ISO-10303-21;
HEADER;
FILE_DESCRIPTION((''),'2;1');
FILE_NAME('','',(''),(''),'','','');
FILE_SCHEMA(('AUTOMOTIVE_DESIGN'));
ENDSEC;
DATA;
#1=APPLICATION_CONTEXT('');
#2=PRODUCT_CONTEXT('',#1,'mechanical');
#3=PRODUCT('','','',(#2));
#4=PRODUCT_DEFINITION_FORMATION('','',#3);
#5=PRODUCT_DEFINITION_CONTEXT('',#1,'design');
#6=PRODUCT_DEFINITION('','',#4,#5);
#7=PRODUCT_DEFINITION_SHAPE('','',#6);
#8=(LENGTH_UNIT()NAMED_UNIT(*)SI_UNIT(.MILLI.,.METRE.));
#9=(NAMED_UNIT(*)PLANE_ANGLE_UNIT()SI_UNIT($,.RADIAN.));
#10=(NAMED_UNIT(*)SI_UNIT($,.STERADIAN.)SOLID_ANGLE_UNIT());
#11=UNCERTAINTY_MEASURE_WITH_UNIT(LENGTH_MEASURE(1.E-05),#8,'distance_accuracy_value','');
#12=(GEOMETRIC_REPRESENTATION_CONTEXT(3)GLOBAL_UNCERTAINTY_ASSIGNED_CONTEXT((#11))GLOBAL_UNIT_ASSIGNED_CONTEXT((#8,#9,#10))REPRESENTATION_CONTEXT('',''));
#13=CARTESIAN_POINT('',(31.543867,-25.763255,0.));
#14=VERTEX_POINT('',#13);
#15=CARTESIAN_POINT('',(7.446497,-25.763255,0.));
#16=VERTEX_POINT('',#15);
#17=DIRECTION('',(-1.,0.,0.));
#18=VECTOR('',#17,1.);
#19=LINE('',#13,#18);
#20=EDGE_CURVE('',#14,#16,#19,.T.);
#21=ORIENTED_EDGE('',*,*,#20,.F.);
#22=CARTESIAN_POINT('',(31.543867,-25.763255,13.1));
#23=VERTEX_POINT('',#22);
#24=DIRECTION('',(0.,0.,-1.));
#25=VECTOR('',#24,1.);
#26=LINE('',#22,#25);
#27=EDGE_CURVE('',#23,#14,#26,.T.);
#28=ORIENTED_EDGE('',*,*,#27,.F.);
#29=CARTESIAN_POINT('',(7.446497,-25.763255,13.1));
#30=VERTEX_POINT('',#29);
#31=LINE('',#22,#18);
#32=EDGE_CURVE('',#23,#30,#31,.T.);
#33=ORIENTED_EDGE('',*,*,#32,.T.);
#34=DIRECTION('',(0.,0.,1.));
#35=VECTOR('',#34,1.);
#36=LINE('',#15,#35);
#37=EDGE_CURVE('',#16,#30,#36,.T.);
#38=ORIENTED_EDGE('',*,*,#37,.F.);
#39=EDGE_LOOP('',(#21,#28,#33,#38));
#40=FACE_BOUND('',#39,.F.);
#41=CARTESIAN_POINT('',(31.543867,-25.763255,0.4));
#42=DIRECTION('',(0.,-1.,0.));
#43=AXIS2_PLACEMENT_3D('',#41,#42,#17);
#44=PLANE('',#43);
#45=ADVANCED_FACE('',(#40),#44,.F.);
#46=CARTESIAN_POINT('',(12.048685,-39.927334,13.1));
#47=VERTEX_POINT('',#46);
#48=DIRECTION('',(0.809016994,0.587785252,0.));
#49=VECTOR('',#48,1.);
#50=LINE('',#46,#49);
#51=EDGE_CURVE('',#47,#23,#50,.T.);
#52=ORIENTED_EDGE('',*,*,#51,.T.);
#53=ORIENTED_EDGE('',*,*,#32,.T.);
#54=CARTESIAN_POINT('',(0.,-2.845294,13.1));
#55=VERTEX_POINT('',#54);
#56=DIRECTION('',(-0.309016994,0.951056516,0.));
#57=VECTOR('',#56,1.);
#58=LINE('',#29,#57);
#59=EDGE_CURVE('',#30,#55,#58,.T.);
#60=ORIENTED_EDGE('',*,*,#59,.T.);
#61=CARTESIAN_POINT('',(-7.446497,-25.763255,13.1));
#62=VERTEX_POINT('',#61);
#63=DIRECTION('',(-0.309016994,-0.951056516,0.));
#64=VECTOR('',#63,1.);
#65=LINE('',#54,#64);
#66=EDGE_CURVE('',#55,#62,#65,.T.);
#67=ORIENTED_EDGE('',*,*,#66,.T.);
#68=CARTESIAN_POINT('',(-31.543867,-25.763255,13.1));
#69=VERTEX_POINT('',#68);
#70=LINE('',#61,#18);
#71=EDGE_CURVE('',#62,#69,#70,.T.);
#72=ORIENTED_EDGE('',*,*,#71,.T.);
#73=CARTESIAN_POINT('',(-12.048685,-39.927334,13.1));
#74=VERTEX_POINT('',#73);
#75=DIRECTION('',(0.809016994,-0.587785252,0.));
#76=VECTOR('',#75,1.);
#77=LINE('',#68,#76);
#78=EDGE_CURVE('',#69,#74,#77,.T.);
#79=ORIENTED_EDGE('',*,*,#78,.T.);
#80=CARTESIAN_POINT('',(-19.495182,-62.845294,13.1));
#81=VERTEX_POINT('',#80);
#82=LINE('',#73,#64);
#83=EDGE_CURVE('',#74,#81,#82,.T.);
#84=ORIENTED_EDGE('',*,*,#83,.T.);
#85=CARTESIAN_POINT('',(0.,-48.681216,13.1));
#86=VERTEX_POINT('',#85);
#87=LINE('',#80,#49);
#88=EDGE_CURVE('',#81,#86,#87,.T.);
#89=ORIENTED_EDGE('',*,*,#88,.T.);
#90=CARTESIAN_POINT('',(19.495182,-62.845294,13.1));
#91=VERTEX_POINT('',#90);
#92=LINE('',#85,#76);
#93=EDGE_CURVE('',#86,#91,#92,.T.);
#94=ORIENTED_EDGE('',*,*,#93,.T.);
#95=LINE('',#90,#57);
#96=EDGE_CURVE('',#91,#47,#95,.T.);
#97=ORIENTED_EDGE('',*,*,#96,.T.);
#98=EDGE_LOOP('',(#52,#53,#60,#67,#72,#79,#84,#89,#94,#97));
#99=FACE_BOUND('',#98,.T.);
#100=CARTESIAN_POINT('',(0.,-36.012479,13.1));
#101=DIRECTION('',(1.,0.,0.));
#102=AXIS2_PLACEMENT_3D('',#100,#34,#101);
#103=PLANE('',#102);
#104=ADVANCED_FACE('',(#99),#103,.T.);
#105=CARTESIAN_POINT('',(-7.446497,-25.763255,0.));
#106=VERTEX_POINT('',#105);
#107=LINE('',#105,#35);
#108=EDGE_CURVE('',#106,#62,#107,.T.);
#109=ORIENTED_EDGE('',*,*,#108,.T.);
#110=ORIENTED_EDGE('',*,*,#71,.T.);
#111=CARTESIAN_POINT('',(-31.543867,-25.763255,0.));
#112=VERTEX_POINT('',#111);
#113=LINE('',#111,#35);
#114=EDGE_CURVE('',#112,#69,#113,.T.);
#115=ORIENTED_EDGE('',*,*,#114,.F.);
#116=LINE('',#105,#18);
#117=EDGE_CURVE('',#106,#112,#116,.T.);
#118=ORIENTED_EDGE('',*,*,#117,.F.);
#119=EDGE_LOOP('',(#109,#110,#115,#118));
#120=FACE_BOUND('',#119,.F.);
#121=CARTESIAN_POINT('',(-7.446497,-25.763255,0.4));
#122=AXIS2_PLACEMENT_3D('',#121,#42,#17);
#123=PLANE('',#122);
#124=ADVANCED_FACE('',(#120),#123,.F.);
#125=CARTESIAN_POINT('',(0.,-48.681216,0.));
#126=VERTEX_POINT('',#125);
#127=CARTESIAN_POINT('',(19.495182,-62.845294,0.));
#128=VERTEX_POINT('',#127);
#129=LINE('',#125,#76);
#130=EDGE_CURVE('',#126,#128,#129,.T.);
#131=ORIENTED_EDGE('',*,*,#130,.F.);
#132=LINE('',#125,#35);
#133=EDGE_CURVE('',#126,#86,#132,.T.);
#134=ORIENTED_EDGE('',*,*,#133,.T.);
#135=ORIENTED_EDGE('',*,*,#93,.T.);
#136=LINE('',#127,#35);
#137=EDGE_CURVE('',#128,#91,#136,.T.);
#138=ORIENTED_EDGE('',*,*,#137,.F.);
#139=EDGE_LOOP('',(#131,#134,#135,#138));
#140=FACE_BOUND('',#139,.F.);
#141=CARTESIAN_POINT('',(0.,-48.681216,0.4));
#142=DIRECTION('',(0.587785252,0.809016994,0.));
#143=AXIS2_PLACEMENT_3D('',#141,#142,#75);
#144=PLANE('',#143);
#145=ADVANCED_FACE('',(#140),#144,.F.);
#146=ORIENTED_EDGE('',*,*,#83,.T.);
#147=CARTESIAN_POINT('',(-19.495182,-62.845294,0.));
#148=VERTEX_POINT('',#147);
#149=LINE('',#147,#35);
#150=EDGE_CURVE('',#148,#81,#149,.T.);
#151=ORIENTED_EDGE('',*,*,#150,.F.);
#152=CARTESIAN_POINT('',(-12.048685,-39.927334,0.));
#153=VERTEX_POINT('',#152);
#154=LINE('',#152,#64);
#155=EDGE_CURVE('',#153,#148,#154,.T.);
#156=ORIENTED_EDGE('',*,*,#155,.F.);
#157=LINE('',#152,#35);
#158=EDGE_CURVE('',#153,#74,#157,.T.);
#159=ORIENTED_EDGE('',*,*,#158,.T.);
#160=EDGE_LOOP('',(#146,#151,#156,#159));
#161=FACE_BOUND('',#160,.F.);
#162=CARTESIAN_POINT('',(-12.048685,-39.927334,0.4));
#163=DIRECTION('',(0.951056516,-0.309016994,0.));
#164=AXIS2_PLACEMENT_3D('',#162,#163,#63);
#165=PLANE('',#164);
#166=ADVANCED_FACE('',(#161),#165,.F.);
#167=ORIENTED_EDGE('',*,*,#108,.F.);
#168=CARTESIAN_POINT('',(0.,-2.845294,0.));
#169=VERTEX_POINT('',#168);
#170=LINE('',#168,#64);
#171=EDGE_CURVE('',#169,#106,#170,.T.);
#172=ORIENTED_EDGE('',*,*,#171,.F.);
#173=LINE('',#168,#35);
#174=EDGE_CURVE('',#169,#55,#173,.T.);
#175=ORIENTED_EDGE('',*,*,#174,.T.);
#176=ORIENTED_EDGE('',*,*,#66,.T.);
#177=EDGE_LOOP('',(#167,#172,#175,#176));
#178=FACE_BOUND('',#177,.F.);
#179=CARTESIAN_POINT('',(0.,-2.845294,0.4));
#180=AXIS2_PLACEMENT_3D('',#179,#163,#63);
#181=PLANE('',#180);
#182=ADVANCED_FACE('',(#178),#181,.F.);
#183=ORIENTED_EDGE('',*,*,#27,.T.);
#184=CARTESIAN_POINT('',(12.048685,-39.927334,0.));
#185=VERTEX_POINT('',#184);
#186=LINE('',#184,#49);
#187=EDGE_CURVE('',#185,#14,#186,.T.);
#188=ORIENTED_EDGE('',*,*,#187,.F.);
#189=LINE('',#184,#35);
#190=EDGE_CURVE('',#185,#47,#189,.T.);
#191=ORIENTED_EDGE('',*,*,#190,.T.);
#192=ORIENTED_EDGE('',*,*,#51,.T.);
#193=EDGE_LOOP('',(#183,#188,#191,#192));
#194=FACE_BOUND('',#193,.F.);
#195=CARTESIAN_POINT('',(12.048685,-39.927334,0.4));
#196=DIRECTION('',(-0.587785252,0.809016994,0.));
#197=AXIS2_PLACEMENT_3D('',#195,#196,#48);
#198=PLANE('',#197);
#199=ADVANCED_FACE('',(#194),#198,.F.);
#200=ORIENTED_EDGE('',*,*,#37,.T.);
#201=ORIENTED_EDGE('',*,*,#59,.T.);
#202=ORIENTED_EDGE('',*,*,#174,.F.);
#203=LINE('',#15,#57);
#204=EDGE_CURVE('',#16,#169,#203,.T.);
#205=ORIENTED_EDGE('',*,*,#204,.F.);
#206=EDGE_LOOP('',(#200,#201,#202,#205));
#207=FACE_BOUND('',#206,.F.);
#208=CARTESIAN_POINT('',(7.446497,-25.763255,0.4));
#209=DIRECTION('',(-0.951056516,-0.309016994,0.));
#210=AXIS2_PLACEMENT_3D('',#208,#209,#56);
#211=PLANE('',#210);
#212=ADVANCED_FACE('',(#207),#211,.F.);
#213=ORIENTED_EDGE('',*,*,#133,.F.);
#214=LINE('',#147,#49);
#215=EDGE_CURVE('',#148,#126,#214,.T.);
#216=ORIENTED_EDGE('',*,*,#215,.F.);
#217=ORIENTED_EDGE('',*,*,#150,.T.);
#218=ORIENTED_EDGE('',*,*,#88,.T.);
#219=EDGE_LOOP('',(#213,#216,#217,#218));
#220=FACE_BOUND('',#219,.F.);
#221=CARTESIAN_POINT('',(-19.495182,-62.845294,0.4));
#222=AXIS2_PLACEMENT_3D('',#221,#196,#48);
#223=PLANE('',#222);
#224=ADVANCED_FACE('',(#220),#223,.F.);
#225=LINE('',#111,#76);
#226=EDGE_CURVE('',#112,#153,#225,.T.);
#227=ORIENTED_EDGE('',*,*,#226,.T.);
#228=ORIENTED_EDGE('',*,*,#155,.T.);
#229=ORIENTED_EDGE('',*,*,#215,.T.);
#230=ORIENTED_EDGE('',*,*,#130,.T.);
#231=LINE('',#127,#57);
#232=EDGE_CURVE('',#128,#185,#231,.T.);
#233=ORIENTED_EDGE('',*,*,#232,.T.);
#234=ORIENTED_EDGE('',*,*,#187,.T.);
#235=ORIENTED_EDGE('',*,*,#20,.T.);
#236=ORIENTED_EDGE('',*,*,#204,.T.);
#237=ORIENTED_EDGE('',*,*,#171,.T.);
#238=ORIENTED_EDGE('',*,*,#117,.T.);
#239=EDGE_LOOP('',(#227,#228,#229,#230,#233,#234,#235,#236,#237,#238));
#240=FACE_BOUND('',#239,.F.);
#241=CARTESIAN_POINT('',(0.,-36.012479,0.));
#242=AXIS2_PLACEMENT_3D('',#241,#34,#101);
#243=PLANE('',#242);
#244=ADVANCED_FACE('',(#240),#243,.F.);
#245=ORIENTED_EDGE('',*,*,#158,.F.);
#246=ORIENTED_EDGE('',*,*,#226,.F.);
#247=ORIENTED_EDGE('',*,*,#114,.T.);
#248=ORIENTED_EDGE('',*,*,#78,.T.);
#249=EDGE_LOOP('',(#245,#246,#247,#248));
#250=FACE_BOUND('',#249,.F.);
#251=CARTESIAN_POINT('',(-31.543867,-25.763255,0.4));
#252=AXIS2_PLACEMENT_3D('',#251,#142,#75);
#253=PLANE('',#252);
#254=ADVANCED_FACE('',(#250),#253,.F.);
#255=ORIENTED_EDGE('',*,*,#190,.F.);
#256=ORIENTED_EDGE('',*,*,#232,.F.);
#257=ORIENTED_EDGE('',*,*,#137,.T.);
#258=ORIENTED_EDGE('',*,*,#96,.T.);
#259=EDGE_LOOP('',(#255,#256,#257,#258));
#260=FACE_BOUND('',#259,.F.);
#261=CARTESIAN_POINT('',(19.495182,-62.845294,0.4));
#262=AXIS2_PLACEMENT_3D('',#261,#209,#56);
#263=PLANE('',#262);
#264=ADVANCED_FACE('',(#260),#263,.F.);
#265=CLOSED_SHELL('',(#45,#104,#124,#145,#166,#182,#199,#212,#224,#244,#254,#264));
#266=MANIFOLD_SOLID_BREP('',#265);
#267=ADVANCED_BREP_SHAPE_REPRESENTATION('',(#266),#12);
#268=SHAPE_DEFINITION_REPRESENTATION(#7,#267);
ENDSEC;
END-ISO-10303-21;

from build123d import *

# Parameters (mm, degrees)
F1_DEPTH = 0.4
F5_DEPTH = 12.7
F6_DEPTH = 12.7


with BuildPart() as f1:
    # F0 (on Top) → F1 (new body)
    with BuildSketch(Plane.XY):
        Polygon((-31.5438667271, -25.7632551613), (-12.0486849532, -39.9273338113), (-19.495181774, -62.8452944863), (0, -48.6812158363), (19.495181774, -62.8452944863), (12.0486849532, -39.9273338113), (31.5438667271, -25.7632551613), (7.4464968208, -25.7632551613), (0, -2.8452944863), (-7.4464968208, -25.7632551613), align=None)
    extrude(amount=F1_DEPTH)

    # F2 (on face) → F5 (join)
    with BuildSketch(Plane.XY.offset(0.4)):
        Polygon((9.747590887, -32.8452944863), (7.4464968208, -25.7632551613), (0, -2.8452944863), (-7.4464968208, -25.7632551613), (-31.5438667271, -25.7632551613), (-12.0486849532, -39.9273338113), (-19.495181774, -62.8452944863), (0, -48.6812158363), (19.495181774, -62.8452944863), (12.0486849532, -39.9273338113), align=None)
        Polygon((31.5438667271, -25.7632551613), (9.747590887, -32.8452944863), (12.0486849532, -39.9273338113), align=None)
    extrude(amount=F5_DEPTH)

    # F6 (add): a face of the model
    f6_faces = [f1.faces().sort_by_distance(p)[0] for p in [
        (16.2459848116, -28.1239349363, 0.4),
    ]]
    extrude(f6_faces, amount=F6_DEPTH)


solid = f1.part
